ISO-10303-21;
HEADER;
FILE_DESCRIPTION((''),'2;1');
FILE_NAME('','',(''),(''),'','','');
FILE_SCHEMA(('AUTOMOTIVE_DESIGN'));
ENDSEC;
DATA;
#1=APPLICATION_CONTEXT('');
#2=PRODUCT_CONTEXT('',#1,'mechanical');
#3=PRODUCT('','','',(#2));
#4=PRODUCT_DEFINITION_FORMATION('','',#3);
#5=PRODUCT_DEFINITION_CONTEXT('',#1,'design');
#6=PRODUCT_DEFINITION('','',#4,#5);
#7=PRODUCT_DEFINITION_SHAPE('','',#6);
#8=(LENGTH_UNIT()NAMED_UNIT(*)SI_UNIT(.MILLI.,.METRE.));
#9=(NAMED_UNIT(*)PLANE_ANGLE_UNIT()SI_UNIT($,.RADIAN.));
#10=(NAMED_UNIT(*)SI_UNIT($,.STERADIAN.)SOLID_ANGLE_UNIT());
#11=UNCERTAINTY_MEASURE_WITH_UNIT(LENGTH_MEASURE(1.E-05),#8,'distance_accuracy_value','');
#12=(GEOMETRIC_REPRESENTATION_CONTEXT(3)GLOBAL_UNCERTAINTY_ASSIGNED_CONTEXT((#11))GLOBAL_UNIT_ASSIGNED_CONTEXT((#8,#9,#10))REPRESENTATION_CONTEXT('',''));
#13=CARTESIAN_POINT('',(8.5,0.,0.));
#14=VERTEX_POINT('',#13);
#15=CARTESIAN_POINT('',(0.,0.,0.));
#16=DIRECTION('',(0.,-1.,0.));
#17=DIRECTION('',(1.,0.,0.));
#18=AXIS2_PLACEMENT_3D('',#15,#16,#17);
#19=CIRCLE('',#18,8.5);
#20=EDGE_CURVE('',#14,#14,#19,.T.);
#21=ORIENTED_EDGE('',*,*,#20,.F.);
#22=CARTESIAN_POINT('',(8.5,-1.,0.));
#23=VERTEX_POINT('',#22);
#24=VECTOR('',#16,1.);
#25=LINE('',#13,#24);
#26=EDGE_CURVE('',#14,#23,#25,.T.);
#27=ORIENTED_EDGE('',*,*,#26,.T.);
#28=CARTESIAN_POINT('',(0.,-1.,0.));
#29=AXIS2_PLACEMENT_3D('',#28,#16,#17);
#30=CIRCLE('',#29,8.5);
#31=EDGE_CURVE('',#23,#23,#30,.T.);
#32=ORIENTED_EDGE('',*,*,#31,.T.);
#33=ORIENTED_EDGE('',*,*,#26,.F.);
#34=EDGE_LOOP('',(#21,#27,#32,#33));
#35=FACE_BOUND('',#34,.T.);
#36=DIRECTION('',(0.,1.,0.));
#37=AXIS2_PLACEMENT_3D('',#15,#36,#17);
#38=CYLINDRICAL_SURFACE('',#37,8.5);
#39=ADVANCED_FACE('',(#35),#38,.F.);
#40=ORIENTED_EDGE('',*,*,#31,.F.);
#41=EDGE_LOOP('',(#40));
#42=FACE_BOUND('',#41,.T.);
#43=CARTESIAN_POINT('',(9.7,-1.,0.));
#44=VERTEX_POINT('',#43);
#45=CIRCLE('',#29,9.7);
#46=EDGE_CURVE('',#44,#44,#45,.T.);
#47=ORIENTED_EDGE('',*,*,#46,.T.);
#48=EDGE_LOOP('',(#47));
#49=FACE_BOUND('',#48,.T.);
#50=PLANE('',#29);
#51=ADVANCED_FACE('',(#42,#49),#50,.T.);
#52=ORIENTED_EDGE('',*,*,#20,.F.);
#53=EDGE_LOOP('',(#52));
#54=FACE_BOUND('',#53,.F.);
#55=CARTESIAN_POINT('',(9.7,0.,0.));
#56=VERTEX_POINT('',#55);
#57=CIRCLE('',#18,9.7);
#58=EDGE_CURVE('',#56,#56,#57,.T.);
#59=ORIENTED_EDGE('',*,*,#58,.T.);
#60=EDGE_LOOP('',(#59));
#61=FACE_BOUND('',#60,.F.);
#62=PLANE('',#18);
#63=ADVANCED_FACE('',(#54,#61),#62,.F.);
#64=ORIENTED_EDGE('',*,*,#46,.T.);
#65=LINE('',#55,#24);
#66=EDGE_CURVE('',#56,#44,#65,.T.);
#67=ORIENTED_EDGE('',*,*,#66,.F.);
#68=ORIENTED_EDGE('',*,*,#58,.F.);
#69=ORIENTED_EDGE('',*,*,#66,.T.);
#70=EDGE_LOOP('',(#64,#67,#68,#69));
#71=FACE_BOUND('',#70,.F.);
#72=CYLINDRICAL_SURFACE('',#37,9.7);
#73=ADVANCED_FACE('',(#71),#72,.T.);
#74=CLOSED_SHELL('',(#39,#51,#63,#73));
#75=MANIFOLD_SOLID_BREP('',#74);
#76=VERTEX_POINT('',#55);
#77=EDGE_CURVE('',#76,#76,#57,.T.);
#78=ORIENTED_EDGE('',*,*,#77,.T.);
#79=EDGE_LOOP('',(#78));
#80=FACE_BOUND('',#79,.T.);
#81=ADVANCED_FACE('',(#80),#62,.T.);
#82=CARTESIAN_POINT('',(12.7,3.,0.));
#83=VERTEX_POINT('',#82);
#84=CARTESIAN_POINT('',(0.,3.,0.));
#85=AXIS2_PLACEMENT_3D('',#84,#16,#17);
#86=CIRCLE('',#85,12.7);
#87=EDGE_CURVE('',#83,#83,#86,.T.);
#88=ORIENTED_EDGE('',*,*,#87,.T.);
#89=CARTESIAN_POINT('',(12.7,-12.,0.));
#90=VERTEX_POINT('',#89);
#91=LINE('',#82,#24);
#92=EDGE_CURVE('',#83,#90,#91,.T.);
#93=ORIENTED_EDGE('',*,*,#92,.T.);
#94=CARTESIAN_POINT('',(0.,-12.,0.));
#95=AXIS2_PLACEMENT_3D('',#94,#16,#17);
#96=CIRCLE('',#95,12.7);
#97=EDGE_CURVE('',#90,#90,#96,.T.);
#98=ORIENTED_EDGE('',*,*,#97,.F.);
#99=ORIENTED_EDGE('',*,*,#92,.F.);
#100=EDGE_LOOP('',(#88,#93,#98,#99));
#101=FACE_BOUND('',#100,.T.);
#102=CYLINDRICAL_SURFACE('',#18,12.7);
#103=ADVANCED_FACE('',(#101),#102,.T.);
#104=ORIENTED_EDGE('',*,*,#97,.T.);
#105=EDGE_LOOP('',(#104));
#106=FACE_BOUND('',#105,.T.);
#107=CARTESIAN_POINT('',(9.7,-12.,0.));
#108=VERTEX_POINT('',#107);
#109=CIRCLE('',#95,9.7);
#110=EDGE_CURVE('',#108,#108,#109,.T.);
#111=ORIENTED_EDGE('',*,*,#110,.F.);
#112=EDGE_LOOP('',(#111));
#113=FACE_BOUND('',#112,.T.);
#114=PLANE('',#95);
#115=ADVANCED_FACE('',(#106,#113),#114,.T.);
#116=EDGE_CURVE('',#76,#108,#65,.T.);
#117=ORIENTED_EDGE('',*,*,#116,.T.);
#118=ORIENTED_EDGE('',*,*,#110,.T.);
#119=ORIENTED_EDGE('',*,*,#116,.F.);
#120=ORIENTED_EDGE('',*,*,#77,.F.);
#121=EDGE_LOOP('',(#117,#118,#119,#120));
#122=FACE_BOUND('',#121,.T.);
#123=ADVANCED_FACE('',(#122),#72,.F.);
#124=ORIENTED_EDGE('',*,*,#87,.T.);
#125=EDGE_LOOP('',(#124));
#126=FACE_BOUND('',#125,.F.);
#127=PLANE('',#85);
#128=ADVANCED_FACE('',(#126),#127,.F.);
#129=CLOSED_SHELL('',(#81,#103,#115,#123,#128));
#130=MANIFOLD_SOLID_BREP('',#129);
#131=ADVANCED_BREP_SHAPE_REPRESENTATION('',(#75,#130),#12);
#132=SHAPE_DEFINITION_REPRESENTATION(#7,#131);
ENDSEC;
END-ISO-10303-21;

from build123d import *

# Parameters (mm, degrees)
F0_R          = 12.7
F0_R_2        = 9.7
F1_DEPTH      = 12
F1_DEPTH_BACK = 3
F0_R_3        = 8.5
F2_DEPTH      = 1
F3_DEPTH      = 3


with BuildPart() as f1:
    # F0 (on Front) → F1 (new body, two sides)
    with BuildSketch(Plane.XZ) as f1_sk:
        Circle(F0_R)
        Circle(F0_R_2, mode=Mode.SUBTRACT)
    extrude(amount=F1_DEPTH)
    extrude(f1_sk.sketch, amount=-F1_DEPTH_BACK)

    # F0 (on Front) → F3 (join)
    with BuildSketch(Plane.XZ):
        Circle(F0_R)
        Circle(F0_R_2, mode=Mode.SUBTRACT)
        Circle(F0_R_2)
        Circle(F0_R_3, mode=Mode.SUBTRACT)
        Circle(F0_R_3)
    extrude(amount=-F3_DEPTH)


with BuildPart() as f2:
    # F0 (on Front) → F2 (new body)
    with BuildSketch(Plane.XZ):
        Circle(F0_R_2)
        Circle(F0_R_3, mode=Mode.SUBTRACT)
    extrude(amount=F2_DEPTH)


solid = Compound([f1.part, f2.part])
